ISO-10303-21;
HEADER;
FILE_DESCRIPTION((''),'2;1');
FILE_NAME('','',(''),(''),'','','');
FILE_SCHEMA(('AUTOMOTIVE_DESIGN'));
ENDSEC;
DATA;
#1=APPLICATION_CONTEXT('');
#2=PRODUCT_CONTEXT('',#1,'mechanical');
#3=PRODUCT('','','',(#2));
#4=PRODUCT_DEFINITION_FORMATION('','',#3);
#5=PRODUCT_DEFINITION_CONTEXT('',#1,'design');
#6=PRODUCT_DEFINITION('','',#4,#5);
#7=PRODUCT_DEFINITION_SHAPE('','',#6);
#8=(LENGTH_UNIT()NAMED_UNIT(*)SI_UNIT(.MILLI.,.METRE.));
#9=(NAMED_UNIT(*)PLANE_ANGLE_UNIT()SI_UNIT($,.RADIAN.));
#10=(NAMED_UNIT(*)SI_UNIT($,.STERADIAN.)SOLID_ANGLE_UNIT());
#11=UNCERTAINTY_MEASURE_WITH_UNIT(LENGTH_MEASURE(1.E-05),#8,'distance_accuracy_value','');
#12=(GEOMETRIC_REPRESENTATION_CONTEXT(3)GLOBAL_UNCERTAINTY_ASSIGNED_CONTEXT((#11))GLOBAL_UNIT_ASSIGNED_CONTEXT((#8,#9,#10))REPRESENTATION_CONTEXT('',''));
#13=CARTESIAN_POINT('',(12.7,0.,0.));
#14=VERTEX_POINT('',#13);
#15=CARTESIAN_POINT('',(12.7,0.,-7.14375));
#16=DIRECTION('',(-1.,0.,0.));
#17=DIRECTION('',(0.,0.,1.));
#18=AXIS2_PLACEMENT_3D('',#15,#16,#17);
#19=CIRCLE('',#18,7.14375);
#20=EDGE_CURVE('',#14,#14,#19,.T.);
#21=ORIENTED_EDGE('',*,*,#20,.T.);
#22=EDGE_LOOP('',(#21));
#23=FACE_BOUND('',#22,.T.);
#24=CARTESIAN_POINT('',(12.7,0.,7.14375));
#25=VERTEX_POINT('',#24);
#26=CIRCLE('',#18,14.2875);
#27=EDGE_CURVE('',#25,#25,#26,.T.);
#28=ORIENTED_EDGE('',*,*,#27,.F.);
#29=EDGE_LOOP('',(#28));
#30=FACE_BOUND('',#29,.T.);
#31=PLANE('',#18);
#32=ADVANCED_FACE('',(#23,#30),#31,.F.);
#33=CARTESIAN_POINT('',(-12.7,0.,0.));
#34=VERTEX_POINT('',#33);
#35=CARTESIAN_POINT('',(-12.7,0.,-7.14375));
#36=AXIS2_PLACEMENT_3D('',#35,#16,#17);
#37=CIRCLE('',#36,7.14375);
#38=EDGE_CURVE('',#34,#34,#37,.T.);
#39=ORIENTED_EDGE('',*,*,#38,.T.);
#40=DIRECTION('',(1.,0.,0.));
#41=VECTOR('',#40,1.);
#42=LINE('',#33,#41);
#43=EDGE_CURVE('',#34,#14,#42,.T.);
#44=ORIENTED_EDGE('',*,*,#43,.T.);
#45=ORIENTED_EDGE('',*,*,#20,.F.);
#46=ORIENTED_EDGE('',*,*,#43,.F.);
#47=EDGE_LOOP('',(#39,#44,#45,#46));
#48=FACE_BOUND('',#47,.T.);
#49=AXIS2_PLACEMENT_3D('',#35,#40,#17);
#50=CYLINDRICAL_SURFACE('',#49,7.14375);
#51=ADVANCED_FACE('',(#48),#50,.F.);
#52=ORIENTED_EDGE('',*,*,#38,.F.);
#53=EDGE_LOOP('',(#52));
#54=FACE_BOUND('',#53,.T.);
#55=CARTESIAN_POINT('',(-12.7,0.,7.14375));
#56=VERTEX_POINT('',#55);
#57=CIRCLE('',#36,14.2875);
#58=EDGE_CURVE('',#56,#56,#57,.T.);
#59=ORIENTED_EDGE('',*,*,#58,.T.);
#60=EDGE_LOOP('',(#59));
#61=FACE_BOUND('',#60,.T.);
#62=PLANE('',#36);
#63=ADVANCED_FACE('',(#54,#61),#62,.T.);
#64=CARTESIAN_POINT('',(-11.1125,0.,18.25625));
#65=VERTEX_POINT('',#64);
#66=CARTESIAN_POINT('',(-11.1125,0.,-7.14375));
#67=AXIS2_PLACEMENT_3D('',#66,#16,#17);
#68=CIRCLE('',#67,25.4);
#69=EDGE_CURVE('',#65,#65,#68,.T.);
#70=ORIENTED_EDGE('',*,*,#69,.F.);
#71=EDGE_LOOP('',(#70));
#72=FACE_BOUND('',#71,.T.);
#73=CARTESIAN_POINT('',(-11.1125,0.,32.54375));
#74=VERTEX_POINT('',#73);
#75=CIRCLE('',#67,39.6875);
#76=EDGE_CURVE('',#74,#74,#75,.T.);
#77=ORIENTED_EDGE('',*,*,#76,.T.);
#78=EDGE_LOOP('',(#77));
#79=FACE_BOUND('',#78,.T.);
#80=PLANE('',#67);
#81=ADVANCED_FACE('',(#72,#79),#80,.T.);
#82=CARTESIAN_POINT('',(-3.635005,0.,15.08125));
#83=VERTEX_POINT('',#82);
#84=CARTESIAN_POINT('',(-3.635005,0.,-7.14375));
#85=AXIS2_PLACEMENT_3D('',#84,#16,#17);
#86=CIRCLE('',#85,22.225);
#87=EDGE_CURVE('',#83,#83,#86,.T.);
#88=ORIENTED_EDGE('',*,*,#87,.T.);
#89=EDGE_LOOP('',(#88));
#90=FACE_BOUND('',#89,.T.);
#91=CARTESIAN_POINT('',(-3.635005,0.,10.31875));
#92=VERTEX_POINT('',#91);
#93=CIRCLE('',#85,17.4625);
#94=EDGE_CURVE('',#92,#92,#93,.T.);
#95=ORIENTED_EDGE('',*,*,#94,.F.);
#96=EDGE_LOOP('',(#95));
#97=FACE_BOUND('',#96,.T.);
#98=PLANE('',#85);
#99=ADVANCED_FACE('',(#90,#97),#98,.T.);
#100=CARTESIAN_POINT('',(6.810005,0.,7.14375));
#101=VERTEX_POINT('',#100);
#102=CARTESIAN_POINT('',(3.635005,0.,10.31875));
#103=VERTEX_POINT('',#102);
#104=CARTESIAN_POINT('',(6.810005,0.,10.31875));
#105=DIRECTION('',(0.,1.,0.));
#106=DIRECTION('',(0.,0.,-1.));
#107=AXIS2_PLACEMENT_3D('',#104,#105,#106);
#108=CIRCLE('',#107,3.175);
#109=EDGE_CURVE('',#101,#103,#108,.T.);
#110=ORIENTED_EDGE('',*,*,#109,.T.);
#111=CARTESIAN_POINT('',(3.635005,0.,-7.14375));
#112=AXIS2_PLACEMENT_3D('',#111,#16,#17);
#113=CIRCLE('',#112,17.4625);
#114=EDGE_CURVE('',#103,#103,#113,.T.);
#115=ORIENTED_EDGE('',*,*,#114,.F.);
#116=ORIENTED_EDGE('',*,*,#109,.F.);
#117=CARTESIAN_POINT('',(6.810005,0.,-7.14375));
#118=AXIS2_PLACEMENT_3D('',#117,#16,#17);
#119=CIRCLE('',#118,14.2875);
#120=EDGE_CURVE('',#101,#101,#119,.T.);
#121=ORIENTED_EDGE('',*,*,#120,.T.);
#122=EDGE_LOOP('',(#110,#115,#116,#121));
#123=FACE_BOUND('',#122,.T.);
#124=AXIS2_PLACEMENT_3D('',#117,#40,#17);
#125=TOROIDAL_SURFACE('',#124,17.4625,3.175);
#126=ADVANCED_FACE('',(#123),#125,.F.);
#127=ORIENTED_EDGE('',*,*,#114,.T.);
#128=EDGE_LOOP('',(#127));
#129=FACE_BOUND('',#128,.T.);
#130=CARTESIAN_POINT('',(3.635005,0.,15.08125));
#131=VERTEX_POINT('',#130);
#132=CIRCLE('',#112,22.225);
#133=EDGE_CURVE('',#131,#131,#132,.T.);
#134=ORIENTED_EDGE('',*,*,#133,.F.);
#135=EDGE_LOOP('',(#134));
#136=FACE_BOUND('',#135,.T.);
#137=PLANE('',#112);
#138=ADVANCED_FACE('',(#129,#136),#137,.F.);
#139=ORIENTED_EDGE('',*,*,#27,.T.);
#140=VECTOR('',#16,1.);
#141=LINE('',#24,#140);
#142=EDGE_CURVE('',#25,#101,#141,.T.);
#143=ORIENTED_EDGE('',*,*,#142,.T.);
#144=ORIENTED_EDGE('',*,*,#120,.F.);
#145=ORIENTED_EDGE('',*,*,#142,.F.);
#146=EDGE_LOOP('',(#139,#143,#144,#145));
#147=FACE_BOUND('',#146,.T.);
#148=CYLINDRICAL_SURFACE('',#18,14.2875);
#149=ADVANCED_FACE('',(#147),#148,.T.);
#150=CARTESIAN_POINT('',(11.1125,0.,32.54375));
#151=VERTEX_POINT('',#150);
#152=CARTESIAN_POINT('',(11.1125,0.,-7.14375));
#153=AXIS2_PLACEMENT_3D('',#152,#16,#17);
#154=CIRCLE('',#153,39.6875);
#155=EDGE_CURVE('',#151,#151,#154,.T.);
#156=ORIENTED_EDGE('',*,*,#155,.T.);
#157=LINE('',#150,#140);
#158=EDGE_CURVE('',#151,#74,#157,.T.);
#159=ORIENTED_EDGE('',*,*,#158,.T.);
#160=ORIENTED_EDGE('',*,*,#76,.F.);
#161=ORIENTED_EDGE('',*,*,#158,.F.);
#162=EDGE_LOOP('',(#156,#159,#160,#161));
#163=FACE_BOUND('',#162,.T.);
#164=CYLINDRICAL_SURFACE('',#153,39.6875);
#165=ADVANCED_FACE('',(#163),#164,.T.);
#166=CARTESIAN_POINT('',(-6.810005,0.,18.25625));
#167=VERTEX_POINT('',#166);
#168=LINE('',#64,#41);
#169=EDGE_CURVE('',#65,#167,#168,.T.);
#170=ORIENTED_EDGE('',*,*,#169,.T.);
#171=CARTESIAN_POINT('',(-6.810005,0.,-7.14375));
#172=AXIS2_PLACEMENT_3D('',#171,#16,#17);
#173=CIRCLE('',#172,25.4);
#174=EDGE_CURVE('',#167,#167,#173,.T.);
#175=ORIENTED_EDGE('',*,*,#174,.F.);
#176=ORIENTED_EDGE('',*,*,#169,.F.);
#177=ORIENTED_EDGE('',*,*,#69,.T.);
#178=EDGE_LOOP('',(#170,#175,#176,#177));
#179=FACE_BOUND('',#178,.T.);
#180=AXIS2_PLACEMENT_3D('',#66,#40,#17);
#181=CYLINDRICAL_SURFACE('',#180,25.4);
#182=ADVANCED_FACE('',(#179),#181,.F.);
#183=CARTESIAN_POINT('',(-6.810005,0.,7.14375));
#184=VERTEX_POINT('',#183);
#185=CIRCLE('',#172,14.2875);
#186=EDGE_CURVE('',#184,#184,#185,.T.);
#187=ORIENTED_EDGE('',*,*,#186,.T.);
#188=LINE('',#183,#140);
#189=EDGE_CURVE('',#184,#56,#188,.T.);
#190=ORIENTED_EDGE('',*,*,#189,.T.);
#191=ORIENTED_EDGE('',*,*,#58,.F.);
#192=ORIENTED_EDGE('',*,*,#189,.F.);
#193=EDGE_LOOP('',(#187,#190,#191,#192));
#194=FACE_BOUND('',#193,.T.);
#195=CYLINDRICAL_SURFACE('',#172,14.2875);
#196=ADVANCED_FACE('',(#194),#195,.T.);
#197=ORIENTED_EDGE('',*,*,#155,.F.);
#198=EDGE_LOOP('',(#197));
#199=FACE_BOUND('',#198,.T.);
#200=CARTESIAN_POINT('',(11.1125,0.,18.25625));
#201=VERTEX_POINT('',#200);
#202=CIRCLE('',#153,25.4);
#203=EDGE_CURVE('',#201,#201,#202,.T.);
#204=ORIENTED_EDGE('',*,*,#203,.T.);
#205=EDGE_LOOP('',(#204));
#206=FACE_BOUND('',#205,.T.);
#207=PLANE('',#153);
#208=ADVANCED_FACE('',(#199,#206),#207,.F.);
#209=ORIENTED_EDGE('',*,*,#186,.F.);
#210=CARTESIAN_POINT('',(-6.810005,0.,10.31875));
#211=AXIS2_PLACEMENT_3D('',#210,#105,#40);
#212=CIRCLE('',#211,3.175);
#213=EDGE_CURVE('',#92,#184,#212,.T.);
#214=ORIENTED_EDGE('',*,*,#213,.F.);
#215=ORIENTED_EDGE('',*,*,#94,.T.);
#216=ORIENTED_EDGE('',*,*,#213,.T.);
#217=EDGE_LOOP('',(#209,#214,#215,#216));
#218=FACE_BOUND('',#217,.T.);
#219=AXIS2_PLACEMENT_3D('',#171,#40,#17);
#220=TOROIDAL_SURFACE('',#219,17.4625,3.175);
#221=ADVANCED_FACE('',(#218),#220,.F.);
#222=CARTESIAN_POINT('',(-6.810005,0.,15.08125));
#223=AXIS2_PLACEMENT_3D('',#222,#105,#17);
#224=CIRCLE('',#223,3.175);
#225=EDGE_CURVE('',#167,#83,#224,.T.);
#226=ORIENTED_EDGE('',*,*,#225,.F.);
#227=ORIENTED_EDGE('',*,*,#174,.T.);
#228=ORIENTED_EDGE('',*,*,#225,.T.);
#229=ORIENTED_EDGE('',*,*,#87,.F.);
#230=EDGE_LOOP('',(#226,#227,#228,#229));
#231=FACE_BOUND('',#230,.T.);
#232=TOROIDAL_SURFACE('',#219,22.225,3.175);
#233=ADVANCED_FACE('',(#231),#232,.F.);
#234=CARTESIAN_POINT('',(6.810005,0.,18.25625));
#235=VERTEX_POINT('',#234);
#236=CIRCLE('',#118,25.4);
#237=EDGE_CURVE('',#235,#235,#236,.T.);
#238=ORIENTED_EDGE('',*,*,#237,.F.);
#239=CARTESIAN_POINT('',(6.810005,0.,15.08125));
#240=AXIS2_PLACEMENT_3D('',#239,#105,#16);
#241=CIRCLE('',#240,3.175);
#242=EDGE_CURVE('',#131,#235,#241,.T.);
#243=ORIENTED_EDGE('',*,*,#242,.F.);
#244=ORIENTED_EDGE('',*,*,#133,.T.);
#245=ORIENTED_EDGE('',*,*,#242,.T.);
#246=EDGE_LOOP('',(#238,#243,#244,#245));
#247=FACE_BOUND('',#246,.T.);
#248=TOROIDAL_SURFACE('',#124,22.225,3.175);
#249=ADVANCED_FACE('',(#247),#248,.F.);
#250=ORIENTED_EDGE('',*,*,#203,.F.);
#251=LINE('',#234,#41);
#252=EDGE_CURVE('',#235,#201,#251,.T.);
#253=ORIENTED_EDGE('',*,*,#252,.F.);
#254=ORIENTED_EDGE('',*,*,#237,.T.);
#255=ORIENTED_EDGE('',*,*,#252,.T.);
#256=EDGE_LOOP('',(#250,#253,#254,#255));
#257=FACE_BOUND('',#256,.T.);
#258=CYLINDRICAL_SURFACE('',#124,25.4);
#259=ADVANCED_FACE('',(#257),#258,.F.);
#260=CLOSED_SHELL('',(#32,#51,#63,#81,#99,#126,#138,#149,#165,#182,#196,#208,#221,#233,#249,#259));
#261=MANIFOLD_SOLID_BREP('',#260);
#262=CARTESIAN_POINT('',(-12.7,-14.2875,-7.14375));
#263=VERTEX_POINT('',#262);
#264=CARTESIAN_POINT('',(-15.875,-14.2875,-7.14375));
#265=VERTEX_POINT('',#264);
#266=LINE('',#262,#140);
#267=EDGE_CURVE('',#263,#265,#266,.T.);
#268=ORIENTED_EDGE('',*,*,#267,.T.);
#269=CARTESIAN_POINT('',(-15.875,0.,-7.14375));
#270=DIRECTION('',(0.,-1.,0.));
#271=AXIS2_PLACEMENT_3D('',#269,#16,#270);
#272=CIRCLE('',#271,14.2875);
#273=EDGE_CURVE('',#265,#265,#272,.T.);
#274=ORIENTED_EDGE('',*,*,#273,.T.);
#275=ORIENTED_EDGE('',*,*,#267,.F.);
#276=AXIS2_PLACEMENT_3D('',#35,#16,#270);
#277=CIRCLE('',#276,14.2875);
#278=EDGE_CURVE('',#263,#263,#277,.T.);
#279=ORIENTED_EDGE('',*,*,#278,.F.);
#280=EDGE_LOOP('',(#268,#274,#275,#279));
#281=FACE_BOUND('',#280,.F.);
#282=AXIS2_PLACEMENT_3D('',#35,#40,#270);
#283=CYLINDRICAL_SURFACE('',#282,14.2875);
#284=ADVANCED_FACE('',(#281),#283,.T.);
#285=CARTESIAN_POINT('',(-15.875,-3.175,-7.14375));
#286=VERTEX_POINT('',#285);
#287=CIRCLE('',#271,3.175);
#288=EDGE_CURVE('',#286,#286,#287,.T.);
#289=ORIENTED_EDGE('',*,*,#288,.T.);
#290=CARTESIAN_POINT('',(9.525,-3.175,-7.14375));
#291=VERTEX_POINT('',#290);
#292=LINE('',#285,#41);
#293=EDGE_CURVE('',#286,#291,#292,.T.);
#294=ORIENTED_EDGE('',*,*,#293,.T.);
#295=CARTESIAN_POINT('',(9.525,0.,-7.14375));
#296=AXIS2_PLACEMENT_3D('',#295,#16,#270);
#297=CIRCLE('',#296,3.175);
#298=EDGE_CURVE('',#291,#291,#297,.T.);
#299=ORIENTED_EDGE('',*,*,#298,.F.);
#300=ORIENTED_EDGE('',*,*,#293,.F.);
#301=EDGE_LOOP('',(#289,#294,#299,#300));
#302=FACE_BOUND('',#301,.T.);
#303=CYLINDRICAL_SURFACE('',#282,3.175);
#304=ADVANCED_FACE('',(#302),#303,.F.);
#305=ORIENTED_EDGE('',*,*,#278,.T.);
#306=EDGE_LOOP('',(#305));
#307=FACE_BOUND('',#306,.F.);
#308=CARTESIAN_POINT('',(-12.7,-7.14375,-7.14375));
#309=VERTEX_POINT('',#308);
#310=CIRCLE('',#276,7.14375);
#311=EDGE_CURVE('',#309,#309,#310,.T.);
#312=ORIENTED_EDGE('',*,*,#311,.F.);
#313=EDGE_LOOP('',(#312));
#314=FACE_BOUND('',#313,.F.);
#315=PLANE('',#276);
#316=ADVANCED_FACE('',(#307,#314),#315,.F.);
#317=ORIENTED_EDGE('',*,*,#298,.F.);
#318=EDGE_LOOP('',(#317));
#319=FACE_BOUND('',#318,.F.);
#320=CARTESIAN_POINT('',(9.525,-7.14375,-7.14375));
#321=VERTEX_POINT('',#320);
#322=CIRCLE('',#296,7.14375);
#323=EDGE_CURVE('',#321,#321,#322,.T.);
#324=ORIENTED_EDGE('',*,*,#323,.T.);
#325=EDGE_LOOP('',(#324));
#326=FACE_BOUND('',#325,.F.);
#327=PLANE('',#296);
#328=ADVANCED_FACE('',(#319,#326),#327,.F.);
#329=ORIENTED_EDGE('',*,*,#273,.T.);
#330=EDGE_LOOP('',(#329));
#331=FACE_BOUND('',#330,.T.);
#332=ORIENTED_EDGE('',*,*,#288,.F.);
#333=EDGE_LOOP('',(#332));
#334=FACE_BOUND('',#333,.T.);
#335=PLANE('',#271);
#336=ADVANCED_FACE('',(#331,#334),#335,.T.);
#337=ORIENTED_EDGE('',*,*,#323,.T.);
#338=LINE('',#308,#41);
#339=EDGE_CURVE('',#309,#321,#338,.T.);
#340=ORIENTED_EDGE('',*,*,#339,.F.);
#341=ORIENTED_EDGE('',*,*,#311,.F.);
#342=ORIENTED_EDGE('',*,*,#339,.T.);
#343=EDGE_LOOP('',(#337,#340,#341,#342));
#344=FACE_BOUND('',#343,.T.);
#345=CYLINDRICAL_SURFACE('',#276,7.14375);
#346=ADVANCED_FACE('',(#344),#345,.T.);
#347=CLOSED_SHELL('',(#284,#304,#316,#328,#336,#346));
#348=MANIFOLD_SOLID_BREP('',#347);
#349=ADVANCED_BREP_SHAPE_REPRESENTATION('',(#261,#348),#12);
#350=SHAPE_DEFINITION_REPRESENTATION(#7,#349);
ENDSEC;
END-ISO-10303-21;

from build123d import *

# Parameters (mm, degrees)
F2_R        = 7.14375
F2_R_2      = 3.175
F3_DEPTH    = 22.225
F1_FACE_R   = 14.2875
F1_FACE_R_2 = 7.14375
F3_FACE_R   = 7.14375
F3_FACE_R_2 = 3.175
F4_DEPTH    = 3.175


with BuildPart() as f1:
    # F0 (on Front) → F1 (revolve)
    with BuildSketch(Plane.XZ):
        with BuildLine():
            Line((-12.7, 0), (0, 0))
            Line((0, 0), (0, 32.54375))
            Line((0, 32.54375), (-11.1125, 32.54375))
            Line((-11.1125, 32.54375), (-11.1125, 18.25625))
            Line((-11.1125, 18.25625), (-6.8100053257, 18.25625))
            ThreePointArc((-6.8100053257, 18.25625), (-4.5649412955, 17.3263140303), (-3.6350053257, 15.08125))
            Line((-3.6350053257, 15.08125), (-3.6350053257, 10.31875))
            ThreePointArc((-3.6350053257, 10.31875), (-4.5649412955, 8.0736859697), (-6.8100053257, 7.14375))
            Line((-6.8100053257, 7.14375), (-12.7, 7.14375))
            Line((-12.7, 7.14375), (-12.7, 0))
        make_face()
        with BuildLine():
            Line((0, 32.54375), (0, 0))
            Line((0, 0), (12.7, 0))
            Line((12.7, 0), (12.7, 7.14375))
            Line((12.7, 7.14375), (6.8100053257, 7.14375))
            ThreePointArc((6.8100053257, 7.14375), (4.5649412955, 8.0736859697), (3.6350053257, 10.31875))
            Line((3.6350053257, 10.31875), (3.6350053257, 15.08125))
            ThreePointArc((3.6350053257, 15.08125), (4.5649412955, 17.3263140303), (6.8100053257, 18.25625))
            Line((6.8100053257, 18.25625), (11.1125, 18.25625))
            Line((11.1125, 18.25625), (11.1125, 32.54375))
            Line((11.1125, 32.54375), (0, 32.54375))
        make_face()
    revolve(axis=Axis((-12.7447592095, 0, -7.14375), (-1, 0, 0)))


with BuildPart() as f3:
    # F2 (on face) → F3 (new body)
    with BuildSketch(Plane(origin=(-12.7, 0, 0), x_dir=(0, -1, 0), z_dir=(-1, 0, 0))):
        with Locations((0, -7.14375)):
            Circle(F2_R)
        with Locations((0, -7.14375)):
            Circle(F2_R_2, mode=Mode.SUBTRACT)
    extrude(amount=-F3_DEPTH)

    # F1_face (on face) + F3_face (on face) → F4 (join)
    with BuildSketch(Plane(origin=(-12.7, 0, -7.14375), x_dir=(0, -1, 0), z_dir=(-1, 0, 0))):
        Circle(F1_FACE_R)
        Circle(F1_FACE_R_2, mode=Mode.SUBTRACT)
    with BuildSketch(Plane(origin=(-12.7, 0, -7.14375), x_dir=(0, -1, 0), z_dir=(-1, 0, 0))):
        Circle(F3_FACE_R)
        Circle(F3_FACE_R_2, mode=Mode.SUBTRACT)
    extrude(amount=F4_DEPTH)


solid = Compound([f1.part, f3.part])
